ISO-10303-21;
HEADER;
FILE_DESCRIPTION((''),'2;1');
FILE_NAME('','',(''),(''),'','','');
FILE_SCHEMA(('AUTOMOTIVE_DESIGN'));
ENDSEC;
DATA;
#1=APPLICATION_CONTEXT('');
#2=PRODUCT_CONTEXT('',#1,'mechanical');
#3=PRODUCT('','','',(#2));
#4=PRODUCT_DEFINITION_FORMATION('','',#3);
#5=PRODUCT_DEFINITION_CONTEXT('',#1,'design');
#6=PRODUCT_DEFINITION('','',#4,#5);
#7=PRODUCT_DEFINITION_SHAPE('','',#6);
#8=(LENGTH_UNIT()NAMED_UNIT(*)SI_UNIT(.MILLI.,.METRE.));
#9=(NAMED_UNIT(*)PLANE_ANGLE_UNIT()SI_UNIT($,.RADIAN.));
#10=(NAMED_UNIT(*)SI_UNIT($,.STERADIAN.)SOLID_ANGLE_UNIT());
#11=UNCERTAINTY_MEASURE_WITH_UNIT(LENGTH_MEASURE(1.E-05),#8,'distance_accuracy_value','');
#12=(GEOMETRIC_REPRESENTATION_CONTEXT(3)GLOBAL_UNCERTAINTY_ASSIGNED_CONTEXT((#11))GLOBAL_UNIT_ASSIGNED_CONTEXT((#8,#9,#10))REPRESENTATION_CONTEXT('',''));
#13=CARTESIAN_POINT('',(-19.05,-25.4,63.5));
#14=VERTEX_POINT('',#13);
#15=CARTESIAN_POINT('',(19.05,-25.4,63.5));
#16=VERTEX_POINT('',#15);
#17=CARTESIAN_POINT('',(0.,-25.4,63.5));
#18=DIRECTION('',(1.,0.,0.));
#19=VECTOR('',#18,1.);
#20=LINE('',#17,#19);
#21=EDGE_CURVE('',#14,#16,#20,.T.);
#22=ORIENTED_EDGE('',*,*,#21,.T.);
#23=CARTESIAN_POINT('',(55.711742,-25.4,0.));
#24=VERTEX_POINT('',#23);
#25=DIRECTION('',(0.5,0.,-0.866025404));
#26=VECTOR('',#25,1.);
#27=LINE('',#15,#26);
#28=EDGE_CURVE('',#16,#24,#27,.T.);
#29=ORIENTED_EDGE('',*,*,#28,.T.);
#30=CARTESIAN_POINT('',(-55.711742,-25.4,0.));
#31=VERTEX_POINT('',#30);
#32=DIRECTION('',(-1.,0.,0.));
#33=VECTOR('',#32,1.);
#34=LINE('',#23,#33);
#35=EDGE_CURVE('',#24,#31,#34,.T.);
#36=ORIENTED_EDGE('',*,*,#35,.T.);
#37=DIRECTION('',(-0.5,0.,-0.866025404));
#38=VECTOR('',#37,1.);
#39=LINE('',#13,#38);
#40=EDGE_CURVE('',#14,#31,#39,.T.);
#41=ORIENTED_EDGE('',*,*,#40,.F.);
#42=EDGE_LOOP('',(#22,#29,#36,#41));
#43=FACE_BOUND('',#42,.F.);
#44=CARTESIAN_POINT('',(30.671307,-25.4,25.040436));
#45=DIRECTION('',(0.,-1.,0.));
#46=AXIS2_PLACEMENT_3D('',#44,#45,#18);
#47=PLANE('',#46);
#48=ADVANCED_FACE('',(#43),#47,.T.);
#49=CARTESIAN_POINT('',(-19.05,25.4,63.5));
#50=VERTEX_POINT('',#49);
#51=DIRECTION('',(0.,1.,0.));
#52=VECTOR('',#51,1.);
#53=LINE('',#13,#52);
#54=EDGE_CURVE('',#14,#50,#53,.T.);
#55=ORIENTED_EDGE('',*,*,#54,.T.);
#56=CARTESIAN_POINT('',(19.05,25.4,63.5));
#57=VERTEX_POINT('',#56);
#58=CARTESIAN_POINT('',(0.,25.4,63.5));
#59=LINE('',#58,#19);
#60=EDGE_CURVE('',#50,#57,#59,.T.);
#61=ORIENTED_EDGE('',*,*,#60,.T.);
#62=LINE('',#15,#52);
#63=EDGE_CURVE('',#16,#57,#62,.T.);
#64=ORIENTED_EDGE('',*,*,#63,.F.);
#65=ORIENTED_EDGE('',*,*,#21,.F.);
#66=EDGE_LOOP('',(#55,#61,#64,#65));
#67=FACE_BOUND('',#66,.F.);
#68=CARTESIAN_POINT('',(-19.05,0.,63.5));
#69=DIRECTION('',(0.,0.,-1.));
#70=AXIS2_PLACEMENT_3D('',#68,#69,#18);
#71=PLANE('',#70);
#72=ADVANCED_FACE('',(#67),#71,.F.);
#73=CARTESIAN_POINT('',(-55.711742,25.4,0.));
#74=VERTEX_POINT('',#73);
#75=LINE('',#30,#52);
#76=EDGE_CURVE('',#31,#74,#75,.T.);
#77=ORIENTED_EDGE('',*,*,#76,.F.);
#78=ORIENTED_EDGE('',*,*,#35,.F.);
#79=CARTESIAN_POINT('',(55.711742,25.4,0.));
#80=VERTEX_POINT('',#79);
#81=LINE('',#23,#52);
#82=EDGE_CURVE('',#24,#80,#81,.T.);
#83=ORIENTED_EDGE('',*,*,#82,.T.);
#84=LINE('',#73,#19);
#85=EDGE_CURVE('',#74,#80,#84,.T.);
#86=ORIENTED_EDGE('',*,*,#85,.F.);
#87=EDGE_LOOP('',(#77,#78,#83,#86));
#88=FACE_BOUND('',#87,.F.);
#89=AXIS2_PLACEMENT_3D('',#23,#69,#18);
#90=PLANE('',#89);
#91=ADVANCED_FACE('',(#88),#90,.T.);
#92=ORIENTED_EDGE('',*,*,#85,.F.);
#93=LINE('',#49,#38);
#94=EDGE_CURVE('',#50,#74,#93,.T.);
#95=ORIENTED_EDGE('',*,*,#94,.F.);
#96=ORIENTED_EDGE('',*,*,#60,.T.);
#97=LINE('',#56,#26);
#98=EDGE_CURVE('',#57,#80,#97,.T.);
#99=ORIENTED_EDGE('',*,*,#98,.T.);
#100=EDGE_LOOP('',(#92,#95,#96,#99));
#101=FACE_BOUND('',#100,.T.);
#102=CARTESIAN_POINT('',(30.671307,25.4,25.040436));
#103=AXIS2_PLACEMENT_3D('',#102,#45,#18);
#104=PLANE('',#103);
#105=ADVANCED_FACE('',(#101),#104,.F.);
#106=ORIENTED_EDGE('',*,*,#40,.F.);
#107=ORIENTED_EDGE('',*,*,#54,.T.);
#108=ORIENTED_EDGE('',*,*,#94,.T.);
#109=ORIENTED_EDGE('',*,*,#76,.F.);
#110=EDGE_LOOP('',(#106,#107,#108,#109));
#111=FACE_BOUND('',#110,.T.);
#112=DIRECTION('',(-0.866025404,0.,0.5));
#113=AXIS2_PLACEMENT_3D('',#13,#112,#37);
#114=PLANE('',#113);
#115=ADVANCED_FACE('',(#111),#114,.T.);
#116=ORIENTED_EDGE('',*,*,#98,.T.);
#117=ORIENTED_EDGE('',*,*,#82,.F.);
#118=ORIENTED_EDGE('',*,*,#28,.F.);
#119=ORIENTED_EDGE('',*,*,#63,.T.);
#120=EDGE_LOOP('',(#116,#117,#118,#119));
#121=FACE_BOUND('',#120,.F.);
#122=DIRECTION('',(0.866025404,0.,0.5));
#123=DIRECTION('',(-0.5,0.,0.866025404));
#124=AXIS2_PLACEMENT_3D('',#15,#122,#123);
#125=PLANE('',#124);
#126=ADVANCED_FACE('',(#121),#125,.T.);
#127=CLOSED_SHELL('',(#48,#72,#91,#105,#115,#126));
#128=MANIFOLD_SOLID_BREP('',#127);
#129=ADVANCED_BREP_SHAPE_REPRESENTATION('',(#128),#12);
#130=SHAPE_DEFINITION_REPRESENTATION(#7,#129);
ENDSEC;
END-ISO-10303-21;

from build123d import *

# Parameters (mm, degrees)
F0_W     = 38.1
F0_H     = 63.5
F1_DEPTH = 25.4
F3_DEPTH = 50.8


# Not quite as in the source:
# - a pattern or mirror of a feature is missing from the dataset's text; its kind, count and spacing are read off the source's solid


with BuildPart() as f1:
    # F0 (on Front) → F1 (new body, symmetric)
    with BuildSketch(Plane.XZ):
        with Locations((0, 31.75)):
            Rectangle(F0_W, F0_H)
    extrude(amount=F1_DEPTH, both=True)

    # F2 (on face) → F3 (join, through all)
    with BuildSketch(Plane.XZ.offset(25.4)):
        Polygon((-19.05, 0), (-19.05, 63.5), (-55.7117420935, 0), align=None)
    f3 = extrude(amount=-F3_DEPTH)

    # F3_copies: F3 across plane
    add(f3.mirror(Plane(origin=(0, 0, 0), x_dir=(0, 0, 1), z_dir=(1, 0, 0))))


solid = f1.part
